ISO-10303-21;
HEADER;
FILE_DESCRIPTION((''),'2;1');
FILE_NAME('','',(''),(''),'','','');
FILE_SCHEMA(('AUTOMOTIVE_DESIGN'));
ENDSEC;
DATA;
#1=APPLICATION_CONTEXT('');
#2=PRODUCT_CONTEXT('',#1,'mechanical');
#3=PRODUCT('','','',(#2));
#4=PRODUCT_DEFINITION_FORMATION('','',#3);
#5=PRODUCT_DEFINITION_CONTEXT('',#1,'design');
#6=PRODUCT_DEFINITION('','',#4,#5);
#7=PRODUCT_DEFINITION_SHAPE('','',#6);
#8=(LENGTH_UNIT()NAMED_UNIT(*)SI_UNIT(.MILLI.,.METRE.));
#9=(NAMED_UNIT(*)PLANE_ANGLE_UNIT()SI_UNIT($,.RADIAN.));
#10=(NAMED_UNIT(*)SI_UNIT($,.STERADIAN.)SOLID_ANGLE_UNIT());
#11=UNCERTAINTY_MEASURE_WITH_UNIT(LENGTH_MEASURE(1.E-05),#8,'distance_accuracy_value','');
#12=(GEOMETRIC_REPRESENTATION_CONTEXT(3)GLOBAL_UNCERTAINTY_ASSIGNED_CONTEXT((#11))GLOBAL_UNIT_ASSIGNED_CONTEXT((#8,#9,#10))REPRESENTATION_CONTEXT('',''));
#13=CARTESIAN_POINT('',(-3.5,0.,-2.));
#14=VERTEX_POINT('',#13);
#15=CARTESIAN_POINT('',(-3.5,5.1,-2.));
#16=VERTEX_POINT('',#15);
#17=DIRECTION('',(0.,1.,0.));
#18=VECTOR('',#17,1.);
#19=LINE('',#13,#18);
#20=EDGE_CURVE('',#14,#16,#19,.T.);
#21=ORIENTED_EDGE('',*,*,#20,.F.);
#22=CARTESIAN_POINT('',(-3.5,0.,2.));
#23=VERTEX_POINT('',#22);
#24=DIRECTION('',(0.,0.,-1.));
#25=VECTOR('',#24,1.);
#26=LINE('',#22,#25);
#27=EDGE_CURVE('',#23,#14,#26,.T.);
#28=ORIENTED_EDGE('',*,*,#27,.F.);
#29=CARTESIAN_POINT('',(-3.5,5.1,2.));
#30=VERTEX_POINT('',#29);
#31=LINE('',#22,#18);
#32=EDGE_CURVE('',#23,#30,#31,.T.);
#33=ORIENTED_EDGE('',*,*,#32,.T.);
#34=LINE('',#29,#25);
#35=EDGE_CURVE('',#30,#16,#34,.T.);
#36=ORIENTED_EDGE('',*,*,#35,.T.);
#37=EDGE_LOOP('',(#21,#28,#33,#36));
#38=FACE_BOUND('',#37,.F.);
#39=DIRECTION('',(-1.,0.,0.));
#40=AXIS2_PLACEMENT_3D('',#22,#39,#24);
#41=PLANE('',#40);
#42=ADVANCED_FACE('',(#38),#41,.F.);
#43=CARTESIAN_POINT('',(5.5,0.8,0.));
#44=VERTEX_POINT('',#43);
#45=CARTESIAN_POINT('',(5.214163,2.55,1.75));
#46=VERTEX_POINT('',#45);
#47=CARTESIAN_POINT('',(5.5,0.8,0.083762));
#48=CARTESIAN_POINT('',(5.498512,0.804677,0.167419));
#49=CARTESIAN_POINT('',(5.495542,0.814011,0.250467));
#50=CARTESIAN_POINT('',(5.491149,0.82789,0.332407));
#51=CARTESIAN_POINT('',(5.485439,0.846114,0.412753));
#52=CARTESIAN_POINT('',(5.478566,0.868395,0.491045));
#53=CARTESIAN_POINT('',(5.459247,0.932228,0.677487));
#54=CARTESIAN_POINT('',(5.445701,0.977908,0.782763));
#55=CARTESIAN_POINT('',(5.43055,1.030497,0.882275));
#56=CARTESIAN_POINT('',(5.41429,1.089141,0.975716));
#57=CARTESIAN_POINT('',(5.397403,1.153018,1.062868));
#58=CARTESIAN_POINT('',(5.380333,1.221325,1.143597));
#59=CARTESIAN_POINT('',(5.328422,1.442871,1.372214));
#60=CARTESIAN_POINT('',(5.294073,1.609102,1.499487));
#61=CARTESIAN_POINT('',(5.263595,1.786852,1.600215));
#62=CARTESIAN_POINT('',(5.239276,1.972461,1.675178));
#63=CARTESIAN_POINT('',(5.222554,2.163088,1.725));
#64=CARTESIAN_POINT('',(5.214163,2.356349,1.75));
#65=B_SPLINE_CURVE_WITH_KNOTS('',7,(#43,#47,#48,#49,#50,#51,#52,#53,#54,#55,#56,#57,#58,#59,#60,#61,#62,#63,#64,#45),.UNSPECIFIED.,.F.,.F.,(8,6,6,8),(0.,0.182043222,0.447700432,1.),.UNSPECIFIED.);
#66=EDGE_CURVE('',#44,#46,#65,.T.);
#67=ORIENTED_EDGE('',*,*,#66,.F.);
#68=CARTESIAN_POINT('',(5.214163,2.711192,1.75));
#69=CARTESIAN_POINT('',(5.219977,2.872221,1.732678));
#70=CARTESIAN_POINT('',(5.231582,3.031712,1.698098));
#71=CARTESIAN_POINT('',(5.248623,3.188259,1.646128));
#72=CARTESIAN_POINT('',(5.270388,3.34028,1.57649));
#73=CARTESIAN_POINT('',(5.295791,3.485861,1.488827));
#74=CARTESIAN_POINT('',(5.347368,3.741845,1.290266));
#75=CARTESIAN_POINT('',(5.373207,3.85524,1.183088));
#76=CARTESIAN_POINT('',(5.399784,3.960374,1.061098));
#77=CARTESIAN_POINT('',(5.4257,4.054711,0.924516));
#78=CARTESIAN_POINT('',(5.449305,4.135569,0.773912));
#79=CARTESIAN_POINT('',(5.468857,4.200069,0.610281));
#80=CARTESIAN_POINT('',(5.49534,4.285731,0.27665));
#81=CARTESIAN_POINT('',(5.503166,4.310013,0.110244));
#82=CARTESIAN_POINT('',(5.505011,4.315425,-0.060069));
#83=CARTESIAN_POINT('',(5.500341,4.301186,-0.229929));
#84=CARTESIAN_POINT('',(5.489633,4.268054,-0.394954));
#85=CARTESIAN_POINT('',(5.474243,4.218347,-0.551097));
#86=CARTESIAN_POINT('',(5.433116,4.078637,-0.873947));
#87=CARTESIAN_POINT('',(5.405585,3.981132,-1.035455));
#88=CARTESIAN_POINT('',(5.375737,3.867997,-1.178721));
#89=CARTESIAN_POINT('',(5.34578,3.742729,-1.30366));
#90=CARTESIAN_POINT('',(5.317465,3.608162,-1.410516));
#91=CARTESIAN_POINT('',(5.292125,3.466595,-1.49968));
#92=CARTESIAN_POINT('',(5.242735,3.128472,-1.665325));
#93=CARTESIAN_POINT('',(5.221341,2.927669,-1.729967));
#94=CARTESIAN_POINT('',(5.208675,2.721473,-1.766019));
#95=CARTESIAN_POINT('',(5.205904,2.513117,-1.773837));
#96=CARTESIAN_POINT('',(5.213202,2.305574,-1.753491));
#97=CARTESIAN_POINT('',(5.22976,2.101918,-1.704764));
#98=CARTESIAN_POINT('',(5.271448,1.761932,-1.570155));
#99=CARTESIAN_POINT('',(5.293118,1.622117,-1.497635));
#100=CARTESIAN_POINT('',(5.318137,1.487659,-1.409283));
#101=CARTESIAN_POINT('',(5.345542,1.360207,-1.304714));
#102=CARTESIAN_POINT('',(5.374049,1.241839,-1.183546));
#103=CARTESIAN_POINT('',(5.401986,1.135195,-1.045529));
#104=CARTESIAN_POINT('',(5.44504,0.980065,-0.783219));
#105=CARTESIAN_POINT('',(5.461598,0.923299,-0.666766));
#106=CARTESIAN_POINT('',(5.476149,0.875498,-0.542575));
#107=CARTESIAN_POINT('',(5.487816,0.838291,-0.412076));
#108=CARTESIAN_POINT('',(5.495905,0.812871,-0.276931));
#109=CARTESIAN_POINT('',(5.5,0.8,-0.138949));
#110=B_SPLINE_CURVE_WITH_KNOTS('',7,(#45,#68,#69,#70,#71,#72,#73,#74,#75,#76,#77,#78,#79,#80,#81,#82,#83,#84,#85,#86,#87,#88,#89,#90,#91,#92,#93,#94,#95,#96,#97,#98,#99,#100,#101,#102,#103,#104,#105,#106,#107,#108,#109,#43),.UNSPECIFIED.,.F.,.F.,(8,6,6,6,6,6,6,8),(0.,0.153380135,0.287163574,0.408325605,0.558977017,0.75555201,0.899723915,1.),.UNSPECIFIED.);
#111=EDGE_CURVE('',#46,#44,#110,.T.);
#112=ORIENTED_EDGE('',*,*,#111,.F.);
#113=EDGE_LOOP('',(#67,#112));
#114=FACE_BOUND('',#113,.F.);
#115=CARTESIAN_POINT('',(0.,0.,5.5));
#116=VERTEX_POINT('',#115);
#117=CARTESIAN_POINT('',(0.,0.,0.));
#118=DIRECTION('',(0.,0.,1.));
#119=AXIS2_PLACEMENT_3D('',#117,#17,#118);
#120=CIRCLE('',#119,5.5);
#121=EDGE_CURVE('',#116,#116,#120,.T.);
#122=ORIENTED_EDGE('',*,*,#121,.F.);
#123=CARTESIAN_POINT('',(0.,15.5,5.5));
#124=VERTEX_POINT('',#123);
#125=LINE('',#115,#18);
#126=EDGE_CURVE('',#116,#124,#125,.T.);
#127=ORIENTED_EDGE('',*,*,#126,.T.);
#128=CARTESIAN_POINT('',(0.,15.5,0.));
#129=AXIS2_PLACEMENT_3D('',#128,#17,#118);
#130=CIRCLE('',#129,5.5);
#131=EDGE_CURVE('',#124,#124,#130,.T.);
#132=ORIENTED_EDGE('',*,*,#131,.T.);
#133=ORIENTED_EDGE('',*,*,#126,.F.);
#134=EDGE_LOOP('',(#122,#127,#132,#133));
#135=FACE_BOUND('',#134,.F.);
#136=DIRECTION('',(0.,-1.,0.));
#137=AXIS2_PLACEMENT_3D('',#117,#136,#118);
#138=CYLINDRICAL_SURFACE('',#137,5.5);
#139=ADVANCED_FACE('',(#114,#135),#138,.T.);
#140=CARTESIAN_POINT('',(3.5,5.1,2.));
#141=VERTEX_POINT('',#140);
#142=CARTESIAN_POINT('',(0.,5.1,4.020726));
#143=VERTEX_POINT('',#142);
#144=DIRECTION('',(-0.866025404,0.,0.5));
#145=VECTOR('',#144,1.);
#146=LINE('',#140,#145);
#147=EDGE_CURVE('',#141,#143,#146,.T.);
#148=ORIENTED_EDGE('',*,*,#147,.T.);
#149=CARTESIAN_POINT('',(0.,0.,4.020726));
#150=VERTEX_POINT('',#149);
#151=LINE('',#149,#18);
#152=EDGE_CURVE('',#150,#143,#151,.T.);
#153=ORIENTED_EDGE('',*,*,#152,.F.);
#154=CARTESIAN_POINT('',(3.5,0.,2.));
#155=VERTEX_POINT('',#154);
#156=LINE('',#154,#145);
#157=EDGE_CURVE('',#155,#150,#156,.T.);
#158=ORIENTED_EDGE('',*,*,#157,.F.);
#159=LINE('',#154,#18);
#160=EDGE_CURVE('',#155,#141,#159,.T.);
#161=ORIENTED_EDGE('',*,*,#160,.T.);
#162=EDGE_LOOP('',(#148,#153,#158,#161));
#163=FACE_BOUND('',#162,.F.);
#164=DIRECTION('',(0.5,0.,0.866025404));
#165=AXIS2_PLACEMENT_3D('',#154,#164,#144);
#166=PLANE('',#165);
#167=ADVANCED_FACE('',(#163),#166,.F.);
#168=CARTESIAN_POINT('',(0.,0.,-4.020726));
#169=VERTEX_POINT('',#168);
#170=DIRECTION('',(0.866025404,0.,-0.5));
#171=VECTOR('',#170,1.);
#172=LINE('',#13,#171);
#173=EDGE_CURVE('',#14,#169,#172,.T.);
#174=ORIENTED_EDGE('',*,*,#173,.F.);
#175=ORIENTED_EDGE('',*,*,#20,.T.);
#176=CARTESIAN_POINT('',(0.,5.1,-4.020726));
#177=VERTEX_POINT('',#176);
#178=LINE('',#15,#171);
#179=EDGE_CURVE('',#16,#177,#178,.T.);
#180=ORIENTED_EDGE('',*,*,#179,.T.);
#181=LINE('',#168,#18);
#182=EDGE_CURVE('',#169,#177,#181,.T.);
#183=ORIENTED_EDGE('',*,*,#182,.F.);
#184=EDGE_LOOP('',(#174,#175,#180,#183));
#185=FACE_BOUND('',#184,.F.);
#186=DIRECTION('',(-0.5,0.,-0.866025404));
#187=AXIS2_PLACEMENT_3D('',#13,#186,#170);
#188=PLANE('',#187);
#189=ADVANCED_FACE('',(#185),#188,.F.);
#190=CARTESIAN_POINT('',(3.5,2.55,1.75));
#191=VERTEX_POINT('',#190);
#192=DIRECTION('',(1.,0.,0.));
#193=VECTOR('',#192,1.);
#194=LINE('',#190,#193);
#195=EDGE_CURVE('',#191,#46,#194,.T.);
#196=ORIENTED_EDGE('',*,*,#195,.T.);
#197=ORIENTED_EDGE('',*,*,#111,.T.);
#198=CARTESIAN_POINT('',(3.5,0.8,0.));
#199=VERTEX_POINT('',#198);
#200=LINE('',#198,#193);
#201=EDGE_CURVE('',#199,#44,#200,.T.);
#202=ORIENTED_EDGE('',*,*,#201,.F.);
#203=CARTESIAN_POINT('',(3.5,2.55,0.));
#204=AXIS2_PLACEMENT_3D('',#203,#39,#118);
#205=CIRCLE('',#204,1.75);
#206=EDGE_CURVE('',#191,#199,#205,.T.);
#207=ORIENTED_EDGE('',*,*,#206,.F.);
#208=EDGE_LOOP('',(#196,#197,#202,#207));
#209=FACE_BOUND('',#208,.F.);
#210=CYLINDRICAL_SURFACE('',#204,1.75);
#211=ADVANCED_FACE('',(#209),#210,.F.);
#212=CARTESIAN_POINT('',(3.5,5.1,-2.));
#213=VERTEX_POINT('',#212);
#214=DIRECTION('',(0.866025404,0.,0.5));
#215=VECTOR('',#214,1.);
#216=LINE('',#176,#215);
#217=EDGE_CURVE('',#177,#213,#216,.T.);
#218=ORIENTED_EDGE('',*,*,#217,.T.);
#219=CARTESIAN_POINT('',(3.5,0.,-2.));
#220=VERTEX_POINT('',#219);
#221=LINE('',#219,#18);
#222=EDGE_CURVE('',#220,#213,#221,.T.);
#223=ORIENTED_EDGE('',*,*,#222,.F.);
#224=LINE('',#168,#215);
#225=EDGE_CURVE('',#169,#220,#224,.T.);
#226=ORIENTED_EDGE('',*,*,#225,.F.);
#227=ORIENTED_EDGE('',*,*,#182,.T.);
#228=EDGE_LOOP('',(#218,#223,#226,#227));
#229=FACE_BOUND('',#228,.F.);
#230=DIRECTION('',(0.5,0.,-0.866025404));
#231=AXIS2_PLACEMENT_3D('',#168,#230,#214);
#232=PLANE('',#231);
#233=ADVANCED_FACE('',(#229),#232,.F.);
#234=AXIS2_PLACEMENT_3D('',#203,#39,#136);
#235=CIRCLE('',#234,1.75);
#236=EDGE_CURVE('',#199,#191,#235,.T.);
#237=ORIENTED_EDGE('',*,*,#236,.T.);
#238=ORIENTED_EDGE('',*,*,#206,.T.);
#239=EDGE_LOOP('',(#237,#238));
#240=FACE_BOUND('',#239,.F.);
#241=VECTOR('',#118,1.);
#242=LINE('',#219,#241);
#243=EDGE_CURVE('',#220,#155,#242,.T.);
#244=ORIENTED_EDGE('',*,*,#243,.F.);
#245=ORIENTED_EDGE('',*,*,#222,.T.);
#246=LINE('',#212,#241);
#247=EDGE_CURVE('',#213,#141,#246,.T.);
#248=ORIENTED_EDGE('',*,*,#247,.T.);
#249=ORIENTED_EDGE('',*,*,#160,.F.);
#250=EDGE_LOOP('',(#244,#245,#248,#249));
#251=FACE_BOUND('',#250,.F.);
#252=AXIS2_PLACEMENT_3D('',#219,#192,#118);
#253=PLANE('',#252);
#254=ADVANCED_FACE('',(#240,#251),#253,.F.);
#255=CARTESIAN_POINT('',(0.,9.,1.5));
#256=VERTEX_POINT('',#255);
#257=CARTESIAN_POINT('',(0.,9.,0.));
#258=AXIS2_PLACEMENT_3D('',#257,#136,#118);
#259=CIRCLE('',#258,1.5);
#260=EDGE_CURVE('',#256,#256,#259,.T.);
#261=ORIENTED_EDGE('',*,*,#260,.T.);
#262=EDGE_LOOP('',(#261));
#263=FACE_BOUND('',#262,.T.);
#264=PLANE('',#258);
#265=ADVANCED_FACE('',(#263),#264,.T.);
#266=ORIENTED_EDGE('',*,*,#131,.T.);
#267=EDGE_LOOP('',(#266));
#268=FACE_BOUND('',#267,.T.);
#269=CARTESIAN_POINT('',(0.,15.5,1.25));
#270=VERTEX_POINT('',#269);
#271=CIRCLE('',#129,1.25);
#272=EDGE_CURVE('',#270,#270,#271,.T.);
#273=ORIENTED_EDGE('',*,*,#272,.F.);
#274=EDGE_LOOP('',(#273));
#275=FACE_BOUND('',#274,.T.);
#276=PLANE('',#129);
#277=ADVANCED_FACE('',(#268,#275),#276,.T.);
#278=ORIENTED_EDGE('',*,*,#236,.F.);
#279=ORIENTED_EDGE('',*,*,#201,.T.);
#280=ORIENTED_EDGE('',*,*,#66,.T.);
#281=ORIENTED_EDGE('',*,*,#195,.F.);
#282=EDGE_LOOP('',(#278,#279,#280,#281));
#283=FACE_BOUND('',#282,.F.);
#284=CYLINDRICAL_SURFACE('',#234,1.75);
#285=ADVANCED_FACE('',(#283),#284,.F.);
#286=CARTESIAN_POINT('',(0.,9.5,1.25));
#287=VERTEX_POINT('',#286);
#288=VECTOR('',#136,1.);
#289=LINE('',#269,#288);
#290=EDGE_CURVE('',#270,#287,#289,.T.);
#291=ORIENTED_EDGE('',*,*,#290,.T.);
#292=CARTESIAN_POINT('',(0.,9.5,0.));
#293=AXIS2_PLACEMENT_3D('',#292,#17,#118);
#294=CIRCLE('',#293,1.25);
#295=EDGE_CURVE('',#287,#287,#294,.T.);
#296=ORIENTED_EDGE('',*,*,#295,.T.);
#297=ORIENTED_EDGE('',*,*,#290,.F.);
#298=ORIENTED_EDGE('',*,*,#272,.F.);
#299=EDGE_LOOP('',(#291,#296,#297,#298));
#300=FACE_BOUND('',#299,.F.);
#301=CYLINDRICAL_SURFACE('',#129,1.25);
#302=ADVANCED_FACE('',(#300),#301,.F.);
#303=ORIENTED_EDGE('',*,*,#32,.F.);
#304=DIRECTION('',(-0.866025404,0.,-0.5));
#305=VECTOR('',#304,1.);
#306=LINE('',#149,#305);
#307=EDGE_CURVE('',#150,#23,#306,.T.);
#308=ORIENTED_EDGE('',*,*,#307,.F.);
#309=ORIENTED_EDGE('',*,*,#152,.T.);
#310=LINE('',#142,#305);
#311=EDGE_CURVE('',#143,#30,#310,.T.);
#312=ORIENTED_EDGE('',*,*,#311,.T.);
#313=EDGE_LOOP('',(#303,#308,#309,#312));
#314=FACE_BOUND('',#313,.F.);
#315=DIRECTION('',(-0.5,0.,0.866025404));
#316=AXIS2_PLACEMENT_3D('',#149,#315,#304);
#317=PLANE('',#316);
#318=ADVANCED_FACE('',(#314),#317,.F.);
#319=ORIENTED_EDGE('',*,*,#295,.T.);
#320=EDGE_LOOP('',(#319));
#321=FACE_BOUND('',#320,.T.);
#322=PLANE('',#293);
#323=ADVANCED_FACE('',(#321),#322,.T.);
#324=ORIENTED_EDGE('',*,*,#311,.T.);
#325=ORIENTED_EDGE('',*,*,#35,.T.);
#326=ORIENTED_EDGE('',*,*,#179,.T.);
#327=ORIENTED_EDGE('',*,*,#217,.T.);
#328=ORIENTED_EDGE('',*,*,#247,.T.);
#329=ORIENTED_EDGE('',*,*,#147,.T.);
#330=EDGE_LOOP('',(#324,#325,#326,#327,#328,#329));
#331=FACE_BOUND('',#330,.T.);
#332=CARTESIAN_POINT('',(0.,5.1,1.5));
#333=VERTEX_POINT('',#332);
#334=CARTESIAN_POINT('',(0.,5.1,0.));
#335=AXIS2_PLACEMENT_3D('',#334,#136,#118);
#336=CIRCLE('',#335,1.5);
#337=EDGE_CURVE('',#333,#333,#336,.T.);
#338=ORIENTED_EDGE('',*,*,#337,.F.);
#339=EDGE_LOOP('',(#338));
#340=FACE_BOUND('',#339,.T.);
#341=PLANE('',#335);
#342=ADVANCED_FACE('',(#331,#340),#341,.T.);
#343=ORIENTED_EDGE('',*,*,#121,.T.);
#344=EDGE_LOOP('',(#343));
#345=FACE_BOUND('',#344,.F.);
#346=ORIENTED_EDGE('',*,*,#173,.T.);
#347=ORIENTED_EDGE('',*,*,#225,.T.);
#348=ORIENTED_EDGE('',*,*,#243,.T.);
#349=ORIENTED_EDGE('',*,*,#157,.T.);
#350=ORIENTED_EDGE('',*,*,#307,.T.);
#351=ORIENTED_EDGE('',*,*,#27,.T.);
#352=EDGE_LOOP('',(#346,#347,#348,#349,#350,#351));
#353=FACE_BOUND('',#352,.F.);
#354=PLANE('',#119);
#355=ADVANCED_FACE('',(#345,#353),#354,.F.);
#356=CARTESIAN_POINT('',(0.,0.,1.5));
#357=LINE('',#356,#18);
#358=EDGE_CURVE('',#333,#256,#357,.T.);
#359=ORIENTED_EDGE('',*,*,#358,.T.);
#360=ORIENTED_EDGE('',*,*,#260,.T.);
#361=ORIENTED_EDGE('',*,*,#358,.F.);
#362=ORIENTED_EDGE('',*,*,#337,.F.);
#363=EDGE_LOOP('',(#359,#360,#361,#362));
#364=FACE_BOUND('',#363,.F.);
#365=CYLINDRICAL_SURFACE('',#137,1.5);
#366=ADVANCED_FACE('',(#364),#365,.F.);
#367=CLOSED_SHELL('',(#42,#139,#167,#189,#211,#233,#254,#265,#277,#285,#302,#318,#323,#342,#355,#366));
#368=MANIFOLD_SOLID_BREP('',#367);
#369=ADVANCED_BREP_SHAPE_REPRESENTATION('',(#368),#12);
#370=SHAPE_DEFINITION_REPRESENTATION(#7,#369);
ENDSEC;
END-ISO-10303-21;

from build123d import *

# Parameters (mm, degrees)
F0_R      = 5.5
F1_DEPTH  = 15.5
F2_R      = 1.5
F3_DEPTH  = 9
F5_R      = 1.25
F6_DEPTH  = 6
F4_R      = 1.5
F7_DEPTH  = 5.1
F9_DEPTH  = 25.4
F11_ANGLE = 180
F13_ANGLE = -90
F15_ANGLE = 90


# Not quite as in the source:
# - a feature names something its author has since deleted; it is built from what else it names


with BuildPart() as f1:
    # F0 (on Top) → F1 (new body)
    with BuildSketch(Plane.XY):
        Circle(F0_R)
    extrude(amount=F1_DEPTH)

    # F2 (on face) → F3 (cut)
    with BuildSketch(Plane(origin=(0, 0, 0), x_dir=(1, 0, 0), z_dir=(0, 0, -1))):
        Circle(F2_R)
    extrude(amount=-F3_DEPTH, mode=Mode.SUBTRACT)

    # F5 (on face) → F6 (cut)
    with BuildSketch(Plane.XY.offset(15.5)):
        Circle(F5_R)
    extrude(amount=-F6_DEPTH, mode=Mode.SUBTRACT)

    # F4 (on face) → F7 (cut)
    with BuildSketch(Plane(origin=(0, 0, 0), x_dir=(1, 0, 0), z_dir=(0, 0, -1))):
        Polygon((2, 3.5), (-2, 3.5), (-4.0207259422, 0), (-2, -3.5), (2, -3.5), (4.0207259422, 0), align=None)
        Circle(F4_R, mode=Mode.SUBTRACT)
    extrude(amount=-F7_DEPTH, mode=Mode.SUBTRACT)

    # F8 (on face) → F9 (cut)
    with BuildSketch(Plane.XZ.offset(-3.5)):
        with BuildLine():
            ThreePointArc((1.75, 2.55), (-1.2374368671, 3.7874368671), (0, 0.8))
            ThreePointArc((0, 0.8), (1.2374368671, 1.3125631329), (1.75, 2.55))
        make_face()
    extrude(amount=-F9_DEPTH, mode=Mode.SUBTRACT)


with BuildPart() as f1_1:
    # F11: moved
    add(f1.part.rotate(Axis((9.4123384915, 0, 0), (1, 0, 0)), F11_ANGLE))


with BuildPart() as f1_2:
    # F13: moved
    add(f1_1.part.rotate(Axis((-2.3788576946, 0, 0), (-1, 0, 0)), F13_ANGLE))


with BuildPart() as f1_3:
    # F15: moved
    add(f1_2.part.rotate(Axis((0, 5.9970328584, 0), (0, -1, 0)), F15_ANGLE))


solid = f1_3.part
